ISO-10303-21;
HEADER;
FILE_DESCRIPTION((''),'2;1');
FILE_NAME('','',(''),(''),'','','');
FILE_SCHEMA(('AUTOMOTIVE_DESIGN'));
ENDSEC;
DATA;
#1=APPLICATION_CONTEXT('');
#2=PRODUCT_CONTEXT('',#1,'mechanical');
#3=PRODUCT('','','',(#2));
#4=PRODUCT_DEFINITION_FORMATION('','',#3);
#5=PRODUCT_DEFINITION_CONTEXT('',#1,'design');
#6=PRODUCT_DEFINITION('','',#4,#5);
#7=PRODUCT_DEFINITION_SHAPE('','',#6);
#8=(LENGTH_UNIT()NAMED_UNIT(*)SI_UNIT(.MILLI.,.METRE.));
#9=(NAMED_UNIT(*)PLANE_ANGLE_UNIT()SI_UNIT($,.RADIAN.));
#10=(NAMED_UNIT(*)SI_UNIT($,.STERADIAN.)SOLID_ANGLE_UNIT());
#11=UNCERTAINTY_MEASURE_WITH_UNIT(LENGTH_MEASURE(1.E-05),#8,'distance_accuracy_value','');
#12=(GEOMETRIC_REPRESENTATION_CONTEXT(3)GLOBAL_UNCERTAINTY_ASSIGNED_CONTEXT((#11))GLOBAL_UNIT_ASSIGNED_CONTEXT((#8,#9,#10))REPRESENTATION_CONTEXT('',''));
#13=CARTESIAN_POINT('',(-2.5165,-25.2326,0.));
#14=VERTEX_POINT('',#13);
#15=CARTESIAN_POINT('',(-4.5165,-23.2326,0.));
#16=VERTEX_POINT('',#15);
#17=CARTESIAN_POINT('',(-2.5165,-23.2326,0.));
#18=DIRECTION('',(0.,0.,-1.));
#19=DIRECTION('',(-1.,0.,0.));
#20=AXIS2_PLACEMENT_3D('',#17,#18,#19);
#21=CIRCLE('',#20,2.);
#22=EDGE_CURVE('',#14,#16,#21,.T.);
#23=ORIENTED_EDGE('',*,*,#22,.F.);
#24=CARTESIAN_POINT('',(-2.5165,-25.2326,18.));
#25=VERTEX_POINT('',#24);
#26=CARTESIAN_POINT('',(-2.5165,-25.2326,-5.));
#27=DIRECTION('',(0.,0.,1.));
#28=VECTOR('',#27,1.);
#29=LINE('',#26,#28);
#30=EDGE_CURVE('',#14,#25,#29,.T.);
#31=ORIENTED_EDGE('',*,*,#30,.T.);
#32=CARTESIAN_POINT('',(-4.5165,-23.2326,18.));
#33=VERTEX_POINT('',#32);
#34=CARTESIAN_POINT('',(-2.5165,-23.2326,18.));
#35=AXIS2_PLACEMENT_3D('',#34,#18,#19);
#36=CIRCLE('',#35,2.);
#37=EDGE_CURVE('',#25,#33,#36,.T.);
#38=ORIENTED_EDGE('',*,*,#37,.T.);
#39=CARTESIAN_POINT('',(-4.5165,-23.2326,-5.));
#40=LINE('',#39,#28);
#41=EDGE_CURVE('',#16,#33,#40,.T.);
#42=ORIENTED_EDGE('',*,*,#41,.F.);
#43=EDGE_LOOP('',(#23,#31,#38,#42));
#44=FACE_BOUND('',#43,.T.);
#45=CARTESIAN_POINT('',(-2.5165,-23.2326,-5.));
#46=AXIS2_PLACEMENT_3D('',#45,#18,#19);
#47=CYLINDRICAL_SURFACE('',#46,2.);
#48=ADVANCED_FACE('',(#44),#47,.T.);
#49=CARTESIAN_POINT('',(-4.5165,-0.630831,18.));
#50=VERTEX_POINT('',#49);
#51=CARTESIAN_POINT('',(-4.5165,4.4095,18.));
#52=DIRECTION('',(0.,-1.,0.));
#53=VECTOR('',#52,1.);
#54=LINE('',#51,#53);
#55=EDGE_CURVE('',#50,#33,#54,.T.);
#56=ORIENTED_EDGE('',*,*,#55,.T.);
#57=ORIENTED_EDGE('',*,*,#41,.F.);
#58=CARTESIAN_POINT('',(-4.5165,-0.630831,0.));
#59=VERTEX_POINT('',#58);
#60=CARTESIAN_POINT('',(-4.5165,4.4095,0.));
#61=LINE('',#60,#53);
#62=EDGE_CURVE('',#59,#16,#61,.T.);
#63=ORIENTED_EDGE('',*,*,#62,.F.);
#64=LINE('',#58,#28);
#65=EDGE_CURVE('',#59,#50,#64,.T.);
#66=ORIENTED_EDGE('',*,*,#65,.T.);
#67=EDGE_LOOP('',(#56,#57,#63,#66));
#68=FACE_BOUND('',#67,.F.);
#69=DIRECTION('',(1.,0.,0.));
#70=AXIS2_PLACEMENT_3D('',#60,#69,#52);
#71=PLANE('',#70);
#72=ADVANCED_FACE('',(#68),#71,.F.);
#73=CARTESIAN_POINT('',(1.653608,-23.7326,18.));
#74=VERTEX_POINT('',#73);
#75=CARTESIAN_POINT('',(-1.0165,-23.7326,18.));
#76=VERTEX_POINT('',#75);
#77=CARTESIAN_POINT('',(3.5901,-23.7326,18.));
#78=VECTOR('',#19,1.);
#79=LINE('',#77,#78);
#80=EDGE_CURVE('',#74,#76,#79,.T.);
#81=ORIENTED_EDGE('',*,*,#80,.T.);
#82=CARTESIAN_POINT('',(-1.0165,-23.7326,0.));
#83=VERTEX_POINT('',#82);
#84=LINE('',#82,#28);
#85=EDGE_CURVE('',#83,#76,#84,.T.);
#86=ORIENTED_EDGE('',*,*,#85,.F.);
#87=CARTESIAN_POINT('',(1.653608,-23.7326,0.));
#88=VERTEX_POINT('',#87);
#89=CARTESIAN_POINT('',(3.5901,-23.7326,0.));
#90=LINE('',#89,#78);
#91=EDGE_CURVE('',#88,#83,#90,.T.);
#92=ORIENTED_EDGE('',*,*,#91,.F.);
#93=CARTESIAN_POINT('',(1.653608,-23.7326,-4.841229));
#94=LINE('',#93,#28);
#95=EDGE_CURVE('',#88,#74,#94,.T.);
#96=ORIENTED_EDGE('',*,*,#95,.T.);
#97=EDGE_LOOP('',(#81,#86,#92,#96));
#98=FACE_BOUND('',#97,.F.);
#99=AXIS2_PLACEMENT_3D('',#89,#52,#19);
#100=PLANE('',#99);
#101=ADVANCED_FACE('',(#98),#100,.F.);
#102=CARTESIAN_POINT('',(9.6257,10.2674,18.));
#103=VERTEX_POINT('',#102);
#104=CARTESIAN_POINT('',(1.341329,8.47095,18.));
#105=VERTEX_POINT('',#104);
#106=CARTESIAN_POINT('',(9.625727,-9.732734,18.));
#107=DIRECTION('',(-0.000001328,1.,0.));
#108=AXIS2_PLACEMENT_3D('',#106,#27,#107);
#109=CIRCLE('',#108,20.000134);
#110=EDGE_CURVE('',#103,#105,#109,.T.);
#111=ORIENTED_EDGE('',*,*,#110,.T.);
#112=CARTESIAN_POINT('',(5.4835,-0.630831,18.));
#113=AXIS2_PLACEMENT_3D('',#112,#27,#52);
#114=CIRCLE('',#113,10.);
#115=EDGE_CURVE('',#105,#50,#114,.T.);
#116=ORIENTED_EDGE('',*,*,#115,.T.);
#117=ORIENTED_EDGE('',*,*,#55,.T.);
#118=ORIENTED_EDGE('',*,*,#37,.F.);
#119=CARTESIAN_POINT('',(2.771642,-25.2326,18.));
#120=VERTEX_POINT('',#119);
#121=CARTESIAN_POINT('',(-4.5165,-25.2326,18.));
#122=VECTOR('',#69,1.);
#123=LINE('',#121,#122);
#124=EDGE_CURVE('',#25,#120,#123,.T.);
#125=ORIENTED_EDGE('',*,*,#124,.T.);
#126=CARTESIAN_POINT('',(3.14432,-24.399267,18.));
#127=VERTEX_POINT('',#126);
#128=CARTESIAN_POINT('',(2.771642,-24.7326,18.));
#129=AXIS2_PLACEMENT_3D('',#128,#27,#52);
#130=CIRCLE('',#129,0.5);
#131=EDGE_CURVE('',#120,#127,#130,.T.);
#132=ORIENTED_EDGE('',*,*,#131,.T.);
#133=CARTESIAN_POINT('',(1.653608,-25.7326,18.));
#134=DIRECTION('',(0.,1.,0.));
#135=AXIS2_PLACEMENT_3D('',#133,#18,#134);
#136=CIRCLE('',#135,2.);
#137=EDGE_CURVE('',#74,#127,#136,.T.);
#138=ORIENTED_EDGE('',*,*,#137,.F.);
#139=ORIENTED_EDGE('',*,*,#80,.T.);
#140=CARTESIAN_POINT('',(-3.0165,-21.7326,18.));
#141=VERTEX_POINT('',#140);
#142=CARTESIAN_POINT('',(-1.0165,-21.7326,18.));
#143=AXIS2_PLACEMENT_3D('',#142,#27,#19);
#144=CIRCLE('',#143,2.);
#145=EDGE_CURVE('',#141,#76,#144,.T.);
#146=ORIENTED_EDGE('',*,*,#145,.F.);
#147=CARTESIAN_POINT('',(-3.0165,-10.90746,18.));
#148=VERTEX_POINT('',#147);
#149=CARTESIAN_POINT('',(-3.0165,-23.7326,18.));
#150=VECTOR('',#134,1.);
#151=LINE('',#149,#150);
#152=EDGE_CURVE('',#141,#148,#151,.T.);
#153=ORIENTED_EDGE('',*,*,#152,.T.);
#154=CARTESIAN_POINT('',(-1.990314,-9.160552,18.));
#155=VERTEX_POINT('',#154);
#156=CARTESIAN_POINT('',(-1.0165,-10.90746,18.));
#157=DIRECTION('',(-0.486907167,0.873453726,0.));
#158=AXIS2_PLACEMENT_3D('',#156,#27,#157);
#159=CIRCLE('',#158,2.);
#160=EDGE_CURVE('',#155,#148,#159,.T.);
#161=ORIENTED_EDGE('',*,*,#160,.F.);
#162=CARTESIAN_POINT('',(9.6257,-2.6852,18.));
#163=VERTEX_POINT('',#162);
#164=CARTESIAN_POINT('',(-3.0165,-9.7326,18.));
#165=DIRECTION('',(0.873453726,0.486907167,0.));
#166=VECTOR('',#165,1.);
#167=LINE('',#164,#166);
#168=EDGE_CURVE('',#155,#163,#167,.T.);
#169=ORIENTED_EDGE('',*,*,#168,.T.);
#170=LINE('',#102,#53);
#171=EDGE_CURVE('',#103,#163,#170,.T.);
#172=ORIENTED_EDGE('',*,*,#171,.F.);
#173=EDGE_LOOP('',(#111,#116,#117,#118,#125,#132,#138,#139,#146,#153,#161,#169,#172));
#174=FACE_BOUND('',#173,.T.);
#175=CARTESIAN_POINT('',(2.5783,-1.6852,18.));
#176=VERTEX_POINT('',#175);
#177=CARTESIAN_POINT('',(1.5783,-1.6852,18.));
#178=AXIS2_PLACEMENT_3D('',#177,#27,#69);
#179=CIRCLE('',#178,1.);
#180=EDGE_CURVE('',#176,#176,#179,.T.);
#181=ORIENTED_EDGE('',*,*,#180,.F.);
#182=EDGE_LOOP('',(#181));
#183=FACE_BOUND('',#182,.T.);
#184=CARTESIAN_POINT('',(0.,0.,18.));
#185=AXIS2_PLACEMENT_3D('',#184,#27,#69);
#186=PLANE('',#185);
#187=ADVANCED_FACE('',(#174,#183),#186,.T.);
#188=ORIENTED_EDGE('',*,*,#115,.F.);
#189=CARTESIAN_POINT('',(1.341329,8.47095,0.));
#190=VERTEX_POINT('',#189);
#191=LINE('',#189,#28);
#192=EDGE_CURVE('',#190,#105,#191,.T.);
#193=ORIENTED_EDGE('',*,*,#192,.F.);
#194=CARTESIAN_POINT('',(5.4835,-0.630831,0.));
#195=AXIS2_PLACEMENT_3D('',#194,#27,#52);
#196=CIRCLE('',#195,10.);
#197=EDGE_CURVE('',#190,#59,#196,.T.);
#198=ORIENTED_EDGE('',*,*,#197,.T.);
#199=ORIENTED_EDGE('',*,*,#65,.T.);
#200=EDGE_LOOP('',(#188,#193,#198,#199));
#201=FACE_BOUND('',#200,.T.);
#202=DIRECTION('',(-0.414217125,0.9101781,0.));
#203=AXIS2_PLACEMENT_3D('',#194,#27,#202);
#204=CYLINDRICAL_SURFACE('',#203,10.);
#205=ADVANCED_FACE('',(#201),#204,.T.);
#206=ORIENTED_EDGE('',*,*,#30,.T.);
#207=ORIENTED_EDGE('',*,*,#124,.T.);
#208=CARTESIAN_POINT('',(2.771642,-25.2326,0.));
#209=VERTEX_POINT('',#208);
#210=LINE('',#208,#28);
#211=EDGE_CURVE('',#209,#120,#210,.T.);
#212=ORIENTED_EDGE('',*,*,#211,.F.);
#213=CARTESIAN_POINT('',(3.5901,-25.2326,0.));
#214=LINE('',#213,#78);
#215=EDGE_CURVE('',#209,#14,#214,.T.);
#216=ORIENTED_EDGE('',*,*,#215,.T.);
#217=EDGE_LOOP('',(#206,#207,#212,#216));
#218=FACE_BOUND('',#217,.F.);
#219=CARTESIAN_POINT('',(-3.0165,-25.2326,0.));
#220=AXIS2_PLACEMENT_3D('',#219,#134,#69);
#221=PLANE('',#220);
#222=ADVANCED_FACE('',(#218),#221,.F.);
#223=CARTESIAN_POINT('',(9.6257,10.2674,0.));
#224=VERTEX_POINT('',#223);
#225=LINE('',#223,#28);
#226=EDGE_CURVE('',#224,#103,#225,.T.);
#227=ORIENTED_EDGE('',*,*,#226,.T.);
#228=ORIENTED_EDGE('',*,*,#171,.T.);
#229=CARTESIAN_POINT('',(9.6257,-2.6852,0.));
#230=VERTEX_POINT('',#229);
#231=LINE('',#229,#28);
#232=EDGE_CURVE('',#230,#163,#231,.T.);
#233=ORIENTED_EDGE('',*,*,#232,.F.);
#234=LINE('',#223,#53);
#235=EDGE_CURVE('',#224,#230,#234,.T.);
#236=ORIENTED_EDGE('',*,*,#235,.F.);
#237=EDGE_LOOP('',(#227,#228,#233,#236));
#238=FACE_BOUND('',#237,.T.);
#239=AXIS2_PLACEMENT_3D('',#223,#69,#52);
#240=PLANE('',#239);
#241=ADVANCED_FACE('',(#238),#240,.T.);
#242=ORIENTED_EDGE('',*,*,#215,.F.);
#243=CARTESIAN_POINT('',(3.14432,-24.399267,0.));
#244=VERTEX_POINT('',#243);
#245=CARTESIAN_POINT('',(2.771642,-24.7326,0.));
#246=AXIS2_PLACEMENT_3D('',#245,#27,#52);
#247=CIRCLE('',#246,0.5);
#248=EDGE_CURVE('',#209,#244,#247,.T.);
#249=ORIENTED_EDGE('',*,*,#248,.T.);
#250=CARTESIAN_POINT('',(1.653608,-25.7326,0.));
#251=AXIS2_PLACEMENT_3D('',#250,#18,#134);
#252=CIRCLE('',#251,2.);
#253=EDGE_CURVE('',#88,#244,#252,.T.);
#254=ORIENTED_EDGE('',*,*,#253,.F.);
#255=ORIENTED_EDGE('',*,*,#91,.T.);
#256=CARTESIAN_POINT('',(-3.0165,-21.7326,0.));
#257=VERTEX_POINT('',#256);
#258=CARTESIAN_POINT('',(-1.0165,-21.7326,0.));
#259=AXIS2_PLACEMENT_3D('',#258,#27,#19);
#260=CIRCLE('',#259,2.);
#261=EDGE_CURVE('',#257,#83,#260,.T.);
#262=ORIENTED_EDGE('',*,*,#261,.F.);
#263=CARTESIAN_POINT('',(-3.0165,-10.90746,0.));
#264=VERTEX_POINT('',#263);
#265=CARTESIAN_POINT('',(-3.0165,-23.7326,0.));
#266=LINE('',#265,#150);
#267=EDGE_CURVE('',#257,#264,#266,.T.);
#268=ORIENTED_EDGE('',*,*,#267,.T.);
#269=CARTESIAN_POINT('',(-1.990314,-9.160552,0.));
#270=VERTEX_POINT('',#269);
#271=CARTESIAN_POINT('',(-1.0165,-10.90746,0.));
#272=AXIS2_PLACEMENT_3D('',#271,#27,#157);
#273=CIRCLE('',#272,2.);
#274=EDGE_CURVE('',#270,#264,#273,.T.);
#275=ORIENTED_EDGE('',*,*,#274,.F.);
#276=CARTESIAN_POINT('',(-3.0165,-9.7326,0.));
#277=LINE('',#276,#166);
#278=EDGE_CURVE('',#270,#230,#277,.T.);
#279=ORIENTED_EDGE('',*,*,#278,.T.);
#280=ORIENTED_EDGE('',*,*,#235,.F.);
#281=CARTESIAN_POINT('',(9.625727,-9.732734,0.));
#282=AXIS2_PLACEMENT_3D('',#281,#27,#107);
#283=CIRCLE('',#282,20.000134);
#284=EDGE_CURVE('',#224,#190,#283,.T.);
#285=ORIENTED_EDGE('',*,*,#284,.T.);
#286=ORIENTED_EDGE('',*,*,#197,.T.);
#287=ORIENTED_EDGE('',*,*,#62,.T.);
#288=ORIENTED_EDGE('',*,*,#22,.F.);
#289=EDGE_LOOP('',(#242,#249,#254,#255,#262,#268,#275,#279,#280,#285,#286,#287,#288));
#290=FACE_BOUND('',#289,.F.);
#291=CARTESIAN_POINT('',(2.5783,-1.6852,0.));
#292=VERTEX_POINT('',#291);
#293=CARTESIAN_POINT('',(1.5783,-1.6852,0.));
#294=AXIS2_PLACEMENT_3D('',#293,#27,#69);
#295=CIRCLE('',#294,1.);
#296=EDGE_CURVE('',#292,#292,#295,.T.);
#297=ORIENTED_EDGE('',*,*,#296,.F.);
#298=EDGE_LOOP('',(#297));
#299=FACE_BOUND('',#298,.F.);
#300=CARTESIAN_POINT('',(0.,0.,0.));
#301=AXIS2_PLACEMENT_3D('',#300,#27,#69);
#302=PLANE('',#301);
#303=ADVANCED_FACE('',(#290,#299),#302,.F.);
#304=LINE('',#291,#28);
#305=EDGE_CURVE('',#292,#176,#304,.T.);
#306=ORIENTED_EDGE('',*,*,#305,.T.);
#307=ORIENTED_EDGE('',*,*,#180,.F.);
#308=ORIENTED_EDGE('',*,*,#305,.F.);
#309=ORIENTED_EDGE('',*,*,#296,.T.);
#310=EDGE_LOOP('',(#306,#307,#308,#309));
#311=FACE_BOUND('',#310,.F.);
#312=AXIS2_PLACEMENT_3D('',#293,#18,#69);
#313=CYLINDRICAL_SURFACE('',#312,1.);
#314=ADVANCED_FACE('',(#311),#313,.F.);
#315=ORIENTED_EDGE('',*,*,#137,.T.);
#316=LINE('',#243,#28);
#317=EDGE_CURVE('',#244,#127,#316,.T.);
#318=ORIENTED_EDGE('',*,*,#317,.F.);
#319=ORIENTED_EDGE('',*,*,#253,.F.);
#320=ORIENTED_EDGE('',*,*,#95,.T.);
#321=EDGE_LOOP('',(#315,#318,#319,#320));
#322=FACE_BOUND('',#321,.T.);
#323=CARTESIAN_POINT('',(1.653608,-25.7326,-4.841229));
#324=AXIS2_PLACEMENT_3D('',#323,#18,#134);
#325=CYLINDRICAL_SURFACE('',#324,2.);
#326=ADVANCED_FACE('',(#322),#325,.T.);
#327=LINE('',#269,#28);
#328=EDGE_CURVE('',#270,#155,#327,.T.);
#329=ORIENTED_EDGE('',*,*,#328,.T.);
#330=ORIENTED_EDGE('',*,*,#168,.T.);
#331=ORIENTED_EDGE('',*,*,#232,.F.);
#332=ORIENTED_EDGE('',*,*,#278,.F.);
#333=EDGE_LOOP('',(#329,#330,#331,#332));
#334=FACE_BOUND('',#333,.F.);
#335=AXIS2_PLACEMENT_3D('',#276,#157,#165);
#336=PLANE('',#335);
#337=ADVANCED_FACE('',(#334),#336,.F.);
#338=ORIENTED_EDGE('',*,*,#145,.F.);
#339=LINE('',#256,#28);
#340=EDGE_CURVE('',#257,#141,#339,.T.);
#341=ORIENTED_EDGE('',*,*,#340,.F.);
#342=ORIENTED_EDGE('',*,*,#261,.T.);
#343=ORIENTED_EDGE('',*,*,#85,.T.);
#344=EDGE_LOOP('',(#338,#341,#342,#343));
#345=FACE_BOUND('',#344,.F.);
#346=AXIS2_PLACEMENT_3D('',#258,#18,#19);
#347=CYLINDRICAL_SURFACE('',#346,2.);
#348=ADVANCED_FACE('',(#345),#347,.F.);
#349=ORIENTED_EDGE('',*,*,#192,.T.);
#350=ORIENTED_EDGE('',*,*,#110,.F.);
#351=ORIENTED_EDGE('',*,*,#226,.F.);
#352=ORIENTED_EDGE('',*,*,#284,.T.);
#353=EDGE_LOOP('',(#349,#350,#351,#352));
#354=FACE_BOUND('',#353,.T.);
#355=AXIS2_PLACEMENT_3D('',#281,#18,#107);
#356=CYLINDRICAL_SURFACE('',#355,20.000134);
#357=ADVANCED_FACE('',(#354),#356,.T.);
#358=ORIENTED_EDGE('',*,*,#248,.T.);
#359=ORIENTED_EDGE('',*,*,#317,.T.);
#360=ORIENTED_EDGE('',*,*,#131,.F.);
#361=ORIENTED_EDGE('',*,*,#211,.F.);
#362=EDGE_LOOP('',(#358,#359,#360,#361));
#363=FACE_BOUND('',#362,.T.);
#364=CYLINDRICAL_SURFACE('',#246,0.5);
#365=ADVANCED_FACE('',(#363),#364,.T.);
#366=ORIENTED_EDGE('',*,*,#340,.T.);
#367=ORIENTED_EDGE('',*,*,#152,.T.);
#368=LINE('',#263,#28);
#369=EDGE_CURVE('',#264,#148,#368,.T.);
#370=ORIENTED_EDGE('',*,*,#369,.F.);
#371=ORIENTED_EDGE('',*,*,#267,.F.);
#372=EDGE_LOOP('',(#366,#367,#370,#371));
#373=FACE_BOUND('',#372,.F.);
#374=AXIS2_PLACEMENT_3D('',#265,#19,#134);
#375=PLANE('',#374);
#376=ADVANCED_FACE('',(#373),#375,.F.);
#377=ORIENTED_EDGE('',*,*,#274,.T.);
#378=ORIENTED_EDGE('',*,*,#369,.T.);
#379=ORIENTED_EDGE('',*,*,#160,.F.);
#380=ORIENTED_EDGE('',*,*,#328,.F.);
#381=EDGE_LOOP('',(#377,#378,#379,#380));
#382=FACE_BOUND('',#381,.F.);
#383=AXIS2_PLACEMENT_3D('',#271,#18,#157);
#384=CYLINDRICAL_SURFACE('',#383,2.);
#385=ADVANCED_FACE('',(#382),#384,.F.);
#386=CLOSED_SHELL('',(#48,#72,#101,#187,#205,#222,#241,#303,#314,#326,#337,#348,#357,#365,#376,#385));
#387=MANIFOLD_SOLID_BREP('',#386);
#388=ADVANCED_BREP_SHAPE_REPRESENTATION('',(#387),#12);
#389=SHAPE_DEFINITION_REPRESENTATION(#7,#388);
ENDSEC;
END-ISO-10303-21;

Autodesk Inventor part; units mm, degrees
ref_plane "YZ Plane" through (0, 0, 0) normal (1, 0, 0) x (0, 1, 0)
ref_plane "XZ Plane" through (0, 0, 0) normal (0, 1, 0) x (-1, 0, 0)
ref_plane "XY Plane" through (0, 0, 0) normal (0, 0, 1) x (1, 0, 0)
sketch "Schizzo1" plane through (0, 0, 0) normal (0, 0, 1) x (1, 0, 0)
  line L0 (9.6257, 10.2674) -> (9.6257, -2.6852)
  arc A0 (9.6257, 10.2674) -> (-4.5165, 4.4095) centre (9.6257, -9.7326) ccw
  line L1 (-0.3743, -9.7326) -> (-4.5165, 4.4095) construction
  line L2 (9.6257, 0.2674) -> (-4.5165, 4.4095) construction
  line L3 (4.6257, -4.7326) -> (9.6257, 0.2674) construction
  line L4 (-4.5165, 4.4095) -> (4.6257, -4.7326) construction
  line L5 (9.6257, 0.2674) -> (-2.4454, -2.6616) construction
  circle A1 centre (1.5783, -1.6852) radius 1
  line L6 (-4.5165, 4.4095) -> (-4.5165, -25.2326)
  line L7 (-4.5165, -25.2326) -> (-3.0165, -25.2326)
  line L8 (-3.0165, -23.7326) -> (-3.0165, -9.7326)
  line L9 (-3.0165, -25.2326) -> (3.5901, -25.2326)
  line L10 (3.5901, -25.2326) -> (3.5901, -23.7326)
  line L11 (3.5901, -23.7326) -> (-3.0165, -23.7326)
  line L12 (-3.0165, -9.7326) -> (9.6257, -2.6852)
  point P0 (0, 0)
  dimension "d6" = 2
  dimension "d24" = 1.5
  dimension "d27" = 14
  dimension "d28" = 1.5
extrude "Estrusione1" add sketch "Schizzo1" along normal blind 18
fillet "Raccordo11" radius 2 4 edges at (-3.0165, -9.7326, 9) (-3.0165, -23.7326, 9) (-4.5165, -25.2326, 9) (3.5901, -23.7326, 9)
fillet "Raccordo12" radius 10 1 edges at (-4.5165, 4.4095, 9)
fillet "Raccordo13" radius 0.5 1 edges at (3.5901, -25.2326, 9)
properties part number "Gancio1" material "Plastica ABS"
